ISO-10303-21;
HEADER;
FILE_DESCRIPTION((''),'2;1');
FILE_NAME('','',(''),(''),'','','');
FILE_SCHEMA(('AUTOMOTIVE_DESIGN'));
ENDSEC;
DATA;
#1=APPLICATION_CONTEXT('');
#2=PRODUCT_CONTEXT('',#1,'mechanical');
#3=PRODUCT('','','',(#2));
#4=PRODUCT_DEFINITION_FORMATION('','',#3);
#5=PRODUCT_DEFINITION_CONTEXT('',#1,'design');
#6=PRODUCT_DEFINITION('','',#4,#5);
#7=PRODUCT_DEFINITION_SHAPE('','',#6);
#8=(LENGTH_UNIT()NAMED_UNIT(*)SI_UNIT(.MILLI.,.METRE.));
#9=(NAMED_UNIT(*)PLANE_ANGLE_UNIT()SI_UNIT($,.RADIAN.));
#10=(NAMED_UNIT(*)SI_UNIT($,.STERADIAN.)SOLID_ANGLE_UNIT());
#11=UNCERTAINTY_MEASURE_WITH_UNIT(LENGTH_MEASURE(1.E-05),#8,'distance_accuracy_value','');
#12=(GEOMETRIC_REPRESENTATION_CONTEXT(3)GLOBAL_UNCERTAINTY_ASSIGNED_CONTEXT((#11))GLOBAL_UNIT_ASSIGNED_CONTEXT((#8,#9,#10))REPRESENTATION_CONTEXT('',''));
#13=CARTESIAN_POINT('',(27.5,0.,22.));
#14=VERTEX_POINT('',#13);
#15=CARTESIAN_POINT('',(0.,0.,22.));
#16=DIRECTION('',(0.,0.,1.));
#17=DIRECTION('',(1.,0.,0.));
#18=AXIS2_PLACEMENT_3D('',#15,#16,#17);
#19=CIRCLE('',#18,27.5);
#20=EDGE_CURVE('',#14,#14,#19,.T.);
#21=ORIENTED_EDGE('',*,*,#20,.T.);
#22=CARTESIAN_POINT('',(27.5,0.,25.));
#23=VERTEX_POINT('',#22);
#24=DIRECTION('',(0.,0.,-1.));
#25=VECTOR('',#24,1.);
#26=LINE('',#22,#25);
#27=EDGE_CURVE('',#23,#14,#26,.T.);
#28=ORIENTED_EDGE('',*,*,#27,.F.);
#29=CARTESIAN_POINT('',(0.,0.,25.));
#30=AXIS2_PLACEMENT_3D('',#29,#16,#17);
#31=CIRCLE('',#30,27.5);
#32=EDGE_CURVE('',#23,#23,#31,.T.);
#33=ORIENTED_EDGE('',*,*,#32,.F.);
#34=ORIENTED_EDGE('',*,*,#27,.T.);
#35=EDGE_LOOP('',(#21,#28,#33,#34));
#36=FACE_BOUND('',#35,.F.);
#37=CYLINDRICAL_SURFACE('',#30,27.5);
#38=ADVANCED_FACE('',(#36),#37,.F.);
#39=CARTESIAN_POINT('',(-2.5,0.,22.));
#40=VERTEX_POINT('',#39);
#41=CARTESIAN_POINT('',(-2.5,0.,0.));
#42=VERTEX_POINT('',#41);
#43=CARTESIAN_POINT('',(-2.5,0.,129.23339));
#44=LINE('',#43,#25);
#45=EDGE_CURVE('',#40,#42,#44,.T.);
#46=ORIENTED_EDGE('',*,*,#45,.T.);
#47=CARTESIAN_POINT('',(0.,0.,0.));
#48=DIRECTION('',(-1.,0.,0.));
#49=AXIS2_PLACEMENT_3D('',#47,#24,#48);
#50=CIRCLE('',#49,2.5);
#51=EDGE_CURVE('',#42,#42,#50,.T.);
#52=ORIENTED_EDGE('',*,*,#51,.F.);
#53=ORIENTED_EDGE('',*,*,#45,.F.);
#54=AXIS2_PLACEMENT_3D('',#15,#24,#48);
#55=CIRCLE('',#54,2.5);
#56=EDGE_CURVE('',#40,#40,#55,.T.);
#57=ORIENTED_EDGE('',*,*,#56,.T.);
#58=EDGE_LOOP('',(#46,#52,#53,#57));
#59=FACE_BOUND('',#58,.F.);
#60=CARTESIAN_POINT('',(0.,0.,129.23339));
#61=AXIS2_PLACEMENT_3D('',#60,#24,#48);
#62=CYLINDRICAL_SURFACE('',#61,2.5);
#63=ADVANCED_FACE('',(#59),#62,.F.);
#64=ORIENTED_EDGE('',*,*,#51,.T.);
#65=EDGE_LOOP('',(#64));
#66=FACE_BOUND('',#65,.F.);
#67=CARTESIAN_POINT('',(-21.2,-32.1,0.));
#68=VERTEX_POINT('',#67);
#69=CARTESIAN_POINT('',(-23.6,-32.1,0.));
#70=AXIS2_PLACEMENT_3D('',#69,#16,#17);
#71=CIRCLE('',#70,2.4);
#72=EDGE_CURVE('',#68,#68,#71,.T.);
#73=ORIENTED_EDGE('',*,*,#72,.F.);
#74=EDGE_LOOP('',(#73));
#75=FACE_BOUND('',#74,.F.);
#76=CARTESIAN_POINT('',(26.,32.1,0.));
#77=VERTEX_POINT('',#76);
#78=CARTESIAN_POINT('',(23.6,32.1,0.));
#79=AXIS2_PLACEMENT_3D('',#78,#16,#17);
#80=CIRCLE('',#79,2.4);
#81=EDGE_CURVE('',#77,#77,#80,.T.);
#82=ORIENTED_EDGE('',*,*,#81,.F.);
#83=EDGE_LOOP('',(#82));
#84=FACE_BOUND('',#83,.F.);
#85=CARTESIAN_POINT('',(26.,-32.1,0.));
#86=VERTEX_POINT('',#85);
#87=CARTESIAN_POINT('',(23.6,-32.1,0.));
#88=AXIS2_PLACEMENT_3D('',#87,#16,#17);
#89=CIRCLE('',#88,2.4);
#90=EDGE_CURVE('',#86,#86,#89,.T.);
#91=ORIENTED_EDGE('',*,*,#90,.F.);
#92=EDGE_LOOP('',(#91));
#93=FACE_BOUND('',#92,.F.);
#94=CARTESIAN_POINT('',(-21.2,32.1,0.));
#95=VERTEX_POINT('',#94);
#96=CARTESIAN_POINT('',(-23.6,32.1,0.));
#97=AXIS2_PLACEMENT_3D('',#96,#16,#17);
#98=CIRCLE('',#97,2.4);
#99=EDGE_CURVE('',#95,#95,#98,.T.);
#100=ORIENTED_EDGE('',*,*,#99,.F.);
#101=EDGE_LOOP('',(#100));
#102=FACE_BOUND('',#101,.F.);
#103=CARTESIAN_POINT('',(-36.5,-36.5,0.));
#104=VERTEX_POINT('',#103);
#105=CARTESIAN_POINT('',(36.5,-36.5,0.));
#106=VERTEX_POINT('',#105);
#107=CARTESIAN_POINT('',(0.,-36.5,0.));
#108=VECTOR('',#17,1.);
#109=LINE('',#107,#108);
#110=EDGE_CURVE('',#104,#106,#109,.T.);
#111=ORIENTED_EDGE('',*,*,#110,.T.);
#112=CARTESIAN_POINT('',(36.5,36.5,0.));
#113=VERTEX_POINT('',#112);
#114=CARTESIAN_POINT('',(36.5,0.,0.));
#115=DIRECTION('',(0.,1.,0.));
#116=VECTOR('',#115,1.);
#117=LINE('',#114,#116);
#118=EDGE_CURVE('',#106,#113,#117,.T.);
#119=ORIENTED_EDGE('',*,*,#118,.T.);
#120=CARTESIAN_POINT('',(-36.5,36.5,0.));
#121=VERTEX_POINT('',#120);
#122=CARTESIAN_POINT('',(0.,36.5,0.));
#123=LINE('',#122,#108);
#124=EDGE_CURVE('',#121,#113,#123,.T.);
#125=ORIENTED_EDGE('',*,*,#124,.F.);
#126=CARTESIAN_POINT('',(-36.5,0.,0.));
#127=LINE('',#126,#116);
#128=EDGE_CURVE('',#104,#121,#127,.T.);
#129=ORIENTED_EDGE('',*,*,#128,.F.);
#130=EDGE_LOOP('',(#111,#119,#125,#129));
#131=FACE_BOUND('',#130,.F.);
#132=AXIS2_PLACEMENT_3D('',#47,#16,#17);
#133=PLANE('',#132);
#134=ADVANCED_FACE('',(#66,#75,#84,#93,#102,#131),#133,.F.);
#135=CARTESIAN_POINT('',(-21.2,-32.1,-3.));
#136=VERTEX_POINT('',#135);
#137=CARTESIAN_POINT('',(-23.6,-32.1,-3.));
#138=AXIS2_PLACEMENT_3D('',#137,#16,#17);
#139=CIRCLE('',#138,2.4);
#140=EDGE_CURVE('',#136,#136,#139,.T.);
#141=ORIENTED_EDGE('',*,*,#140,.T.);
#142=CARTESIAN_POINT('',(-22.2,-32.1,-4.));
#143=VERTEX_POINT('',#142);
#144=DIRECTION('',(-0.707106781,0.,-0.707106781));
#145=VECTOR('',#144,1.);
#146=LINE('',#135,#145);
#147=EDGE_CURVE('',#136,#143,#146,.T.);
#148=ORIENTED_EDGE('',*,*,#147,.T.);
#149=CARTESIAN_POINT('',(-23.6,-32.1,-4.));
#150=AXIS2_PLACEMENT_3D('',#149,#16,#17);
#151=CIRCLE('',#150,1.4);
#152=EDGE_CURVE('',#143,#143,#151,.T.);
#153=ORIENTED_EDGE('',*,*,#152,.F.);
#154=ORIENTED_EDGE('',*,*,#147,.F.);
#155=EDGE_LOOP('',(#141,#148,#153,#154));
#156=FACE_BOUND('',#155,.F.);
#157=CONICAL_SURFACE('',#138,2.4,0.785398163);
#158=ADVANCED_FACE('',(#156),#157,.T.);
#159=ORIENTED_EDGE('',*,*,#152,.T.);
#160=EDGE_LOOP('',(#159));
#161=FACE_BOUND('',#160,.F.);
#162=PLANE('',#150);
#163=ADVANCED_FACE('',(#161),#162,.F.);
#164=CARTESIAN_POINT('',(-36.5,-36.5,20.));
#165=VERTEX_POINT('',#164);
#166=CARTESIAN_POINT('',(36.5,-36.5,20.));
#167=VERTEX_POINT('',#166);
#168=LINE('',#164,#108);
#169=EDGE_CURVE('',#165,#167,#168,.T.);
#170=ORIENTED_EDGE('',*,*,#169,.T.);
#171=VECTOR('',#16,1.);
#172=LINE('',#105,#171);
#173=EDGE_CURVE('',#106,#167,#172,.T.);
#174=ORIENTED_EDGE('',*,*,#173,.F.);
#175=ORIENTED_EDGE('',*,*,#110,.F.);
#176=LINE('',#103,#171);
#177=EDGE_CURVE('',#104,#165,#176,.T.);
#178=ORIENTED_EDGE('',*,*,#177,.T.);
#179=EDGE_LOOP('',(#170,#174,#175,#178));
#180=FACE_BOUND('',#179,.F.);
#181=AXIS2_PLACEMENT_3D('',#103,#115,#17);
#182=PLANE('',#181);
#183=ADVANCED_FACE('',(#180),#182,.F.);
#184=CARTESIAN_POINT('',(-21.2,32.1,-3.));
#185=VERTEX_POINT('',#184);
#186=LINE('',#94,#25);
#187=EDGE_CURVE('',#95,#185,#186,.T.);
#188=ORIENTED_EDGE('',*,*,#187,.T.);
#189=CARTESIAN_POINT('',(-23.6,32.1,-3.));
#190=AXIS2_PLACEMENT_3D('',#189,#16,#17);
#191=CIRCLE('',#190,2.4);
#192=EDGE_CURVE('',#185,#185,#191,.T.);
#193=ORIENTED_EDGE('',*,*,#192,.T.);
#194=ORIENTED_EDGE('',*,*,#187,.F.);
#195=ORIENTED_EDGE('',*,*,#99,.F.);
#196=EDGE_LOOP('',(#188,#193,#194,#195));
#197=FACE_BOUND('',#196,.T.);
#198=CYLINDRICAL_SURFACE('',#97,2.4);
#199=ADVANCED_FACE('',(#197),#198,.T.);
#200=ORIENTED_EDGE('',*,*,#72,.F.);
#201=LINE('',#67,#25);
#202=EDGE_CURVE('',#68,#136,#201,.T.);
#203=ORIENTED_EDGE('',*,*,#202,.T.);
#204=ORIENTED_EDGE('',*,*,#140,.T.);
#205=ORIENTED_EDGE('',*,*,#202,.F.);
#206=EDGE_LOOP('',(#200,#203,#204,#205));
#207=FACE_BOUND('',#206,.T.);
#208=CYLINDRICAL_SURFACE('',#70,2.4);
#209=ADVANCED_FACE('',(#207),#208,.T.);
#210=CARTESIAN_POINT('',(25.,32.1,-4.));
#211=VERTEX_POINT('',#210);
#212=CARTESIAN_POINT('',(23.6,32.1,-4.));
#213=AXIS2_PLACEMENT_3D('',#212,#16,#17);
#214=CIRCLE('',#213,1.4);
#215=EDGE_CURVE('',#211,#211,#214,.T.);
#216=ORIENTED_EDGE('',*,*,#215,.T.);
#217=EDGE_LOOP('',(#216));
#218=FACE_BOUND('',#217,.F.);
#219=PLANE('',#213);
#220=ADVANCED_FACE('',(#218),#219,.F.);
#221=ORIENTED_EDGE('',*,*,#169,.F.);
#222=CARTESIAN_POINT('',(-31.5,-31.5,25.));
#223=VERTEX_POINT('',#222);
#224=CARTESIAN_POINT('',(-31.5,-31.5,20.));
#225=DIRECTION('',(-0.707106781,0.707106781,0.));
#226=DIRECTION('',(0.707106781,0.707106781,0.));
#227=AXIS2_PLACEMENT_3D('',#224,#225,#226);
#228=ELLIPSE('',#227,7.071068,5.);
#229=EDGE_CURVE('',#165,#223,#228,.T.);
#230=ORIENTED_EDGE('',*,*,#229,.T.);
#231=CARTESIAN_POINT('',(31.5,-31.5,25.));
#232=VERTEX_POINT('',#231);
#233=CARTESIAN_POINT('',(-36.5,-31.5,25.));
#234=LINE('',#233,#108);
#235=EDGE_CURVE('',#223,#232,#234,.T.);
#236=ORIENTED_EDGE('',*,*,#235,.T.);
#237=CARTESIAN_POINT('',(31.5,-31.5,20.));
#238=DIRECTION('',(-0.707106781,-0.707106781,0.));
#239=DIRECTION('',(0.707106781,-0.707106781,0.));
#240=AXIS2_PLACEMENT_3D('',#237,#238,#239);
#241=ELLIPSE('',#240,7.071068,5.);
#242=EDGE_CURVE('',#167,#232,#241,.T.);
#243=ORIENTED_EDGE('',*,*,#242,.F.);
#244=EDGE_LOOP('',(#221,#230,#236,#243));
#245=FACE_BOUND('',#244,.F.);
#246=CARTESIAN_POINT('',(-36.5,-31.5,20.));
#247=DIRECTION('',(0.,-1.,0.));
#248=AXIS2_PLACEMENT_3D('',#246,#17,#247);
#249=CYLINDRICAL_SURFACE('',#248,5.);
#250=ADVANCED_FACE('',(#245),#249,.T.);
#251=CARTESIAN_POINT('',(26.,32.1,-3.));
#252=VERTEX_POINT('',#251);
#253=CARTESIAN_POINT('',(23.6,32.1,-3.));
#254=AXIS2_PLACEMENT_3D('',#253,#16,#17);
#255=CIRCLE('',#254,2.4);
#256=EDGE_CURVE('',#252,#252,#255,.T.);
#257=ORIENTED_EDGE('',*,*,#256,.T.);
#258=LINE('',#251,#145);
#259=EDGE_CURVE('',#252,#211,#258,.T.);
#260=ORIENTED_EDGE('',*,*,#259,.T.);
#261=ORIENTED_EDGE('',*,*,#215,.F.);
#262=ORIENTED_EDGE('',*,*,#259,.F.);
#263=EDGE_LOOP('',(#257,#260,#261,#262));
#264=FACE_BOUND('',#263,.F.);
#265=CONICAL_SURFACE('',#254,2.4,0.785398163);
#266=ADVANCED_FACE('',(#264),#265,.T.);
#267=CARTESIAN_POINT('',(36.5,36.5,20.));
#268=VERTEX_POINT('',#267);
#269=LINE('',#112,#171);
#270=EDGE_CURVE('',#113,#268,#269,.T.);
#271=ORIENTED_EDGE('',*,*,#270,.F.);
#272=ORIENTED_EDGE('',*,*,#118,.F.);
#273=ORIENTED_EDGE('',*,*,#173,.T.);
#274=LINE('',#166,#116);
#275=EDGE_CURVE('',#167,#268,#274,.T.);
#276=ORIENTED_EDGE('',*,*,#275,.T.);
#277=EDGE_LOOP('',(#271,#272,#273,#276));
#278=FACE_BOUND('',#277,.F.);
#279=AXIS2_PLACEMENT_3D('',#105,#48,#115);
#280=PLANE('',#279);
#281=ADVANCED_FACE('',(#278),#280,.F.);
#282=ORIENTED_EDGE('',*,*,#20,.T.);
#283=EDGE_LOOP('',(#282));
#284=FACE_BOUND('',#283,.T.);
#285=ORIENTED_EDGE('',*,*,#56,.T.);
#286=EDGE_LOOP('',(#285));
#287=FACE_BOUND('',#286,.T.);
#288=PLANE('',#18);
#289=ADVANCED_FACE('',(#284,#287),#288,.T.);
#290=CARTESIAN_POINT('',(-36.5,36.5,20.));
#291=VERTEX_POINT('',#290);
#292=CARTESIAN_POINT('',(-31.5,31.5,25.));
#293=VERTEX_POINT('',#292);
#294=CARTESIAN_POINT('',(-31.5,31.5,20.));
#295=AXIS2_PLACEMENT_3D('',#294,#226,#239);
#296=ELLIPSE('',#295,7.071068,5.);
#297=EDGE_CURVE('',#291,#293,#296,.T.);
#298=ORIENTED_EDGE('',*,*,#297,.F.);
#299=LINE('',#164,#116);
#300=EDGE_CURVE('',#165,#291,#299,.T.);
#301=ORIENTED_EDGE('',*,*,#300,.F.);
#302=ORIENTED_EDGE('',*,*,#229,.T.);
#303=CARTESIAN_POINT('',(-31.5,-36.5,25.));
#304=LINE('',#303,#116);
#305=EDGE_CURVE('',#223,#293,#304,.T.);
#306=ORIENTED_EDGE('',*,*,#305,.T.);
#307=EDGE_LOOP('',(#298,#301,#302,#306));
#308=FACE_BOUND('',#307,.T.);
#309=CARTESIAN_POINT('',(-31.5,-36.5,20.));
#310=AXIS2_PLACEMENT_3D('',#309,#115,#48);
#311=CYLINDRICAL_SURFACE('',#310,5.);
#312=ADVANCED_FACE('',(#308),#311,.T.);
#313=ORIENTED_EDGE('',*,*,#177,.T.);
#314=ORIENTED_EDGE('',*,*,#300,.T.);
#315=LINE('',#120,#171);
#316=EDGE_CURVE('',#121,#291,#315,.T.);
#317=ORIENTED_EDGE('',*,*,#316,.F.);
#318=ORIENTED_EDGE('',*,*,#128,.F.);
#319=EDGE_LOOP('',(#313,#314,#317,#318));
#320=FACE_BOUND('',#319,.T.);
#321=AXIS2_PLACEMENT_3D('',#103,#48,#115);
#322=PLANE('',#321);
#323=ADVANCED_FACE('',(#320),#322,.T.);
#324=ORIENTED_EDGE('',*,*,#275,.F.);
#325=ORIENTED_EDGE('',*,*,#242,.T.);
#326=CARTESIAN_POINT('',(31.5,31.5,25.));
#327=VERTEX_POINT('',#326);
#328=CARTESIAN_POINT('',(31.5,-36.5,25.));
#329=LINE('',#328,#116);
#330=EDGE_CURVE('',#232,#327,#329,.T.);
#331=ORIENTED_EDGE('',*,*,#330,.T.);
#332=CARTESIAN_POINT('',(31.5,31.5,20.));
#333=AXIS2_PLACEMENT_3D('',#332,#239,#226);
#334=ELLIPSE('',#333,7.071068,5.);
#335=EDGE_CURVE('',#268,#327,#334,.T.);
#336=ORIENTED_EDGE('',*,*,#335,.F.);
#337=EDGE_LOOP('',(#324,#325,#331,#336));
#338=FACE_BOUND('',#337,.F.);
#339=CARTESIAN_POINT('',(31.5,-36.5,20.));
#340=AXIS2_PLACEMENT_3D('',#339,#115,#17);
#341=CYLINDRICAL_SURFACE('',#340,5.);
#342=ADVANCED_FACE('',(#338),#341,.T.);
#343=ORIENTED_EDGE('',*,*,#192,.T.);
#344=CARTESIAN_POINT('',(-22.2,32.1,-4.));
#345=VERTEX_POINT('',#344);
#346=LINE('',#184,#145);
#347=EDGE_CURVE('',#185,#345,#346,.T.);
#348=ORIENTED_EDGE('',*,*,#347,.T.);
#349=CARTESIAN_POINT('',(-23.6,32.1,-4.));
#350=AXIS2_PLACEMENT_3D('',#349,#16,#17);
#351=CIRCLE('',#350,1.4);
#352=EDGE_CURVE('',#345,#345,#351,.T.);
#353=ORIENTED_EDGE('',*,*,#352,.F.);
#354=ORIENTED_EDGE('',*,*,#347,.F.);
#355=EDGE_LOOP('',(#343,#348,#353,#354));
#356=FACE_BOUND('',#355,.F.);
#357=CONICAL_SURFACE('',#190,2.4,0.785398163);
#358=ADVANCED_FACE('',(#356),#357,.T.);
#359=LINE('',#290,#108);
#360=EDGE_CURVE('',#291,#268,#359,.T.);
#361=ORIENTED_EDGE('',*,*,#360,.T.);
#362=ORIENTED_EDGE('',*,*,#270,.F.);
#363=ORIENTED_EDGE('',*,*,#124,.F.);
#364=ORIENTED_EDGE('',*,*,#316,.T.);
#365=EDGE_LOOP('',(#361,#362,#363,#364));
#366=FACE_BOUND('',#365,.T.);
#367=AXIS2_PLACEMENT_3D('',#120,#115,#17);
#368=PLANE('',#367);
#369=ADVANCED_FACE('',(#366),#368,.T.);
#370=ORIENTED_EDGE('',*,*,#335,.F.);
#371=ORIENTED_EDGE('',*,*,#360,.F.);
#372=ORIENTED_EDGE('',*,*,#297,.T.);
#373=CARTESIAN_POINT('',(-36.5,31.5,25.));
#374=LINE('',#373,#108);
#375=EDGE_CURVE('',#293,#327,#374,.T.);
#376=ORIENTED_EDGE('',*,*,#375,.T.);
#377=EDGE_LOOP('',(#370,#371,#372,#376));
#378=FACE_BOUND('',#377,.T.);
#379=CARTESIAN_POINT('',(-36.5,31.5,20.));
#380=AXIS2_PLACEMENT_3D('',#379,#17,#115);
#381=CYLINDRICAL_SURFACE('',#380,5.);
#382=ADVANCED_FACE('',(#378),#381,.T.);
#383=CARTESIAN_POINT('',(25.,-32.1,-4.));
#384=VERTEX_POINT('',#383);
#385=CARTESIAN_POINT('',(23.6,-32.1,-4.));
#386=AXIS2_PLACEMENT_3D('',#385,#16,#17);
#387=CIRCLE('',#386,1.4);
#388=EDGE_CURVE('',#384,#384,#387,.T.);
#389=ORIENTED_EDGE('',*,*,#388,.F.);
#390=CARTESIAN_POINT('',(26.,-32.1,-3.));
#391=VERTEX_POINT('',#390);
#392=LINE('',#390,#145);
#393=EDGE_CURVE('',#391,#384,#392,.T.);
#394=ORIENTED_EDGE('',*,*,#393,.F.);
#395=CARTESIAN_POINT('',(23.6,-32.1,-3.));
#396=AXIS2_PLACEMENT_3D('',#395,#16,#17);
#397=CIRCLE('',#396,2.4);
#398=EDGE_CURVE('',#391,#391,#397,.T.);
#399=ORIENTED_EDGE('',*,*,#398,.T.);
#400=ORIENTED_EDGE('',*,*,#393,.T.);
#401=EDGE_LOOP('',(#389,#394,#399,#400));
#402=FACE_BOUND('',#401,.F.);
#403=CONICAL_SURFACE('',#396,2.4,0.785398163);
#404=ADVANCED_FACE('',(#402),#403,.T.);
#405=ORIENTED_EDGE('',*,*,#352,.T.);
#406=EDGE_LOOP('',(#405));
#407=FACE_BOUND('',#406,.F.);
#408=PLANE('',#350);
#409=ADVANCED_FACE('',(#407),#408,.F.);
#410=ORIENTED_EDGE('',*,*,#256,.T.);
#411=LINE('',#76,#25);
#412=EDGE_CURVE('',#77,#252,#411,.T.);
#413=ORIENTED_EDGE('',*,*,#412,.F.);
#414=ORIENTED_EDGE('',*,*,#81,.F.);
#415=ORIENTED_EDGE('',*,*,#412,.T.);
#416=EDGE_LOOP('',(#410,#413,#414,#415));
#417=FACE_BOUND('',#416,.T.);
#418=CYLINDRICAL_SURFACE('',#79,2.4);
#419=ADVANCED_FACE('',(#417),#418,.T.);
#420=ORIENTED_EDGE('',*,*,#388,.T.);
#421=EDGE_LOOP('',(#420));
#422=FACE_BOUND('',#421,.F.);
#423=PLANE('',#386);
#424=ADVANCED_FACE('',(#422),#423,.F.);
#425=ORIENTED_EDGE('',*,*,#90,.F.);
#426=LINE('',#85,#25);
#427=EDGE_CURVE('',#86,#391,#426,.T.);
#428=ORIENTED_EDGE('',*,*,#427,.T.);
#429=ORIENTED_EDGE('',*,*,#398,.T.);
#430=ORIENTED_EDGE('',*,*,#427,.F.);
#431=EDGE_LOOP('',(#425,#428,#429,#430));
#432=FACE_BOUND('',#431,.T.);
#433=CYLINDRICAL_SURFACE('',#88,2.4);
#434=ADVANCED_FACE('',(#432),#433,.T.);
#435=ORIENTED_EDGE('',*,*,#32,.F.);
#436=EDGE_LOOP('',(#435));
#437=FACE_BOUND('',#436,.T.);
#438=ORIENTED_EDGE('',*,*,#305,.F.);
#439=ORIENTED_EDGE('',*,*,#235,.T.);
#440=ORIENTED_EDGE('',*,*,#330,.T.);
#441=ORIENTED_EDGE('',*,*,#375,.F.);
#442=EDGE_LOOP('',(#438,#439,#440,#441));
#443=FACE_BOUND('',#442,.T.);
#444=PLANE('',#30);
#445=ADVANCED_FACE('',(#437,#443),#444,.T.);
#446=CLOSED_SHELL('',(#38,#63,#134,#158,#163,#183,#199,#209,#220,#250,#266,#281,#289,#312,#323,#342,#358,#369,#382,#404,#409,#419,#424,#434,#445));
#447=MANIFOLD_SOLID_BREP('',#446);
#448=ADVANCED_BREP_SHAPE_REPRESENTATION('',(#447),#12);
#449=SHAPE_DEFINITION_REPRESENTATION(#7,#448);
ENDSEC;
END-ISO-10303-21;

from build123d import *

# Parameters (mm, degrees)
F0_W      = 73
F0_H      = 73
F1_DEPTH  = 25
F2_R      = 5
F3_R      = 27.5
F4_DEPTH  = 3
F5_R      = 2.4
F6_DEPTH  = 4
F7_SIZE   = 1
F9_W      = 110.5126142502
F9_H      = 98.0203673244
F10_DEPTH = 40.1
F14_D     = 5


# Not quite as in the source:
# - a feature of the source that left no trace in its solid (it failed there, or was rolled back) is left out


with BuildPart() as f1:
    # F0 (on Top) → F1 (new body)
    with BuildSketch(Plane.XY):
        Rectangle(F0_W, F0_H)
    extrude(amount=F1_DEPTH)

    # F2
    f2_edges = [f1.edges().sort_by_distance(p)[0] for p in [
        (0, 36.5, 25),
        (0, -36.5, 25),
        (36.5, 0, 25),
        (-36.5, 0, 25),
    ]]
    fillet(f2_edges, radius=F2_R)

    # F3 (on face) → F4 (cut)
    with BuildSketch(Plane.XY.offset(25)):
        Circle(F3_R)
    extrude(amount=-F4_DEPTH, mode=Mode.SUBTRACT)

    # F5 (on face) → F6 (join)
    with BuildSketch(Plane.XY):
        with Locations((-23.6, -32.1)):
            Circle(F5_R)
        with Locations((23.6, -32.1)):
            Circle(F5_R)
        with Locations((-23.6, 32.1)):
            Circle(F5_R)
        with Locations((23.6, 32.1)):
            Circle(F5_R)
    extrude(amount=-F6_DEPTH)

    # F7
    f7_edges = [f1.edges().sort_by_distance(p)[0] for p in [
        (-26, -32.1, -4),
        (-26, 32.1, -4),
        (21.2, 32.1, -4),
        (21.2, -32.1, -4),
    ]]
    chamfer(f7_edges, length=F7_SIZE)

    # F14 (through all)
    with Locations(Plane.XY.offset(22)):
        with Locations((0, 0)):
            Hole(F14_D / 2)


with BuildPart() as f10:
    # F9 (on offset) → F10 (new body, through all)
    with BuildSketch(Plane.XY.offset(40.1)):
        Rectangle(F9_W, F9_H)
    extrude(amount=-F10_DEPTH)


solid = f1.part
